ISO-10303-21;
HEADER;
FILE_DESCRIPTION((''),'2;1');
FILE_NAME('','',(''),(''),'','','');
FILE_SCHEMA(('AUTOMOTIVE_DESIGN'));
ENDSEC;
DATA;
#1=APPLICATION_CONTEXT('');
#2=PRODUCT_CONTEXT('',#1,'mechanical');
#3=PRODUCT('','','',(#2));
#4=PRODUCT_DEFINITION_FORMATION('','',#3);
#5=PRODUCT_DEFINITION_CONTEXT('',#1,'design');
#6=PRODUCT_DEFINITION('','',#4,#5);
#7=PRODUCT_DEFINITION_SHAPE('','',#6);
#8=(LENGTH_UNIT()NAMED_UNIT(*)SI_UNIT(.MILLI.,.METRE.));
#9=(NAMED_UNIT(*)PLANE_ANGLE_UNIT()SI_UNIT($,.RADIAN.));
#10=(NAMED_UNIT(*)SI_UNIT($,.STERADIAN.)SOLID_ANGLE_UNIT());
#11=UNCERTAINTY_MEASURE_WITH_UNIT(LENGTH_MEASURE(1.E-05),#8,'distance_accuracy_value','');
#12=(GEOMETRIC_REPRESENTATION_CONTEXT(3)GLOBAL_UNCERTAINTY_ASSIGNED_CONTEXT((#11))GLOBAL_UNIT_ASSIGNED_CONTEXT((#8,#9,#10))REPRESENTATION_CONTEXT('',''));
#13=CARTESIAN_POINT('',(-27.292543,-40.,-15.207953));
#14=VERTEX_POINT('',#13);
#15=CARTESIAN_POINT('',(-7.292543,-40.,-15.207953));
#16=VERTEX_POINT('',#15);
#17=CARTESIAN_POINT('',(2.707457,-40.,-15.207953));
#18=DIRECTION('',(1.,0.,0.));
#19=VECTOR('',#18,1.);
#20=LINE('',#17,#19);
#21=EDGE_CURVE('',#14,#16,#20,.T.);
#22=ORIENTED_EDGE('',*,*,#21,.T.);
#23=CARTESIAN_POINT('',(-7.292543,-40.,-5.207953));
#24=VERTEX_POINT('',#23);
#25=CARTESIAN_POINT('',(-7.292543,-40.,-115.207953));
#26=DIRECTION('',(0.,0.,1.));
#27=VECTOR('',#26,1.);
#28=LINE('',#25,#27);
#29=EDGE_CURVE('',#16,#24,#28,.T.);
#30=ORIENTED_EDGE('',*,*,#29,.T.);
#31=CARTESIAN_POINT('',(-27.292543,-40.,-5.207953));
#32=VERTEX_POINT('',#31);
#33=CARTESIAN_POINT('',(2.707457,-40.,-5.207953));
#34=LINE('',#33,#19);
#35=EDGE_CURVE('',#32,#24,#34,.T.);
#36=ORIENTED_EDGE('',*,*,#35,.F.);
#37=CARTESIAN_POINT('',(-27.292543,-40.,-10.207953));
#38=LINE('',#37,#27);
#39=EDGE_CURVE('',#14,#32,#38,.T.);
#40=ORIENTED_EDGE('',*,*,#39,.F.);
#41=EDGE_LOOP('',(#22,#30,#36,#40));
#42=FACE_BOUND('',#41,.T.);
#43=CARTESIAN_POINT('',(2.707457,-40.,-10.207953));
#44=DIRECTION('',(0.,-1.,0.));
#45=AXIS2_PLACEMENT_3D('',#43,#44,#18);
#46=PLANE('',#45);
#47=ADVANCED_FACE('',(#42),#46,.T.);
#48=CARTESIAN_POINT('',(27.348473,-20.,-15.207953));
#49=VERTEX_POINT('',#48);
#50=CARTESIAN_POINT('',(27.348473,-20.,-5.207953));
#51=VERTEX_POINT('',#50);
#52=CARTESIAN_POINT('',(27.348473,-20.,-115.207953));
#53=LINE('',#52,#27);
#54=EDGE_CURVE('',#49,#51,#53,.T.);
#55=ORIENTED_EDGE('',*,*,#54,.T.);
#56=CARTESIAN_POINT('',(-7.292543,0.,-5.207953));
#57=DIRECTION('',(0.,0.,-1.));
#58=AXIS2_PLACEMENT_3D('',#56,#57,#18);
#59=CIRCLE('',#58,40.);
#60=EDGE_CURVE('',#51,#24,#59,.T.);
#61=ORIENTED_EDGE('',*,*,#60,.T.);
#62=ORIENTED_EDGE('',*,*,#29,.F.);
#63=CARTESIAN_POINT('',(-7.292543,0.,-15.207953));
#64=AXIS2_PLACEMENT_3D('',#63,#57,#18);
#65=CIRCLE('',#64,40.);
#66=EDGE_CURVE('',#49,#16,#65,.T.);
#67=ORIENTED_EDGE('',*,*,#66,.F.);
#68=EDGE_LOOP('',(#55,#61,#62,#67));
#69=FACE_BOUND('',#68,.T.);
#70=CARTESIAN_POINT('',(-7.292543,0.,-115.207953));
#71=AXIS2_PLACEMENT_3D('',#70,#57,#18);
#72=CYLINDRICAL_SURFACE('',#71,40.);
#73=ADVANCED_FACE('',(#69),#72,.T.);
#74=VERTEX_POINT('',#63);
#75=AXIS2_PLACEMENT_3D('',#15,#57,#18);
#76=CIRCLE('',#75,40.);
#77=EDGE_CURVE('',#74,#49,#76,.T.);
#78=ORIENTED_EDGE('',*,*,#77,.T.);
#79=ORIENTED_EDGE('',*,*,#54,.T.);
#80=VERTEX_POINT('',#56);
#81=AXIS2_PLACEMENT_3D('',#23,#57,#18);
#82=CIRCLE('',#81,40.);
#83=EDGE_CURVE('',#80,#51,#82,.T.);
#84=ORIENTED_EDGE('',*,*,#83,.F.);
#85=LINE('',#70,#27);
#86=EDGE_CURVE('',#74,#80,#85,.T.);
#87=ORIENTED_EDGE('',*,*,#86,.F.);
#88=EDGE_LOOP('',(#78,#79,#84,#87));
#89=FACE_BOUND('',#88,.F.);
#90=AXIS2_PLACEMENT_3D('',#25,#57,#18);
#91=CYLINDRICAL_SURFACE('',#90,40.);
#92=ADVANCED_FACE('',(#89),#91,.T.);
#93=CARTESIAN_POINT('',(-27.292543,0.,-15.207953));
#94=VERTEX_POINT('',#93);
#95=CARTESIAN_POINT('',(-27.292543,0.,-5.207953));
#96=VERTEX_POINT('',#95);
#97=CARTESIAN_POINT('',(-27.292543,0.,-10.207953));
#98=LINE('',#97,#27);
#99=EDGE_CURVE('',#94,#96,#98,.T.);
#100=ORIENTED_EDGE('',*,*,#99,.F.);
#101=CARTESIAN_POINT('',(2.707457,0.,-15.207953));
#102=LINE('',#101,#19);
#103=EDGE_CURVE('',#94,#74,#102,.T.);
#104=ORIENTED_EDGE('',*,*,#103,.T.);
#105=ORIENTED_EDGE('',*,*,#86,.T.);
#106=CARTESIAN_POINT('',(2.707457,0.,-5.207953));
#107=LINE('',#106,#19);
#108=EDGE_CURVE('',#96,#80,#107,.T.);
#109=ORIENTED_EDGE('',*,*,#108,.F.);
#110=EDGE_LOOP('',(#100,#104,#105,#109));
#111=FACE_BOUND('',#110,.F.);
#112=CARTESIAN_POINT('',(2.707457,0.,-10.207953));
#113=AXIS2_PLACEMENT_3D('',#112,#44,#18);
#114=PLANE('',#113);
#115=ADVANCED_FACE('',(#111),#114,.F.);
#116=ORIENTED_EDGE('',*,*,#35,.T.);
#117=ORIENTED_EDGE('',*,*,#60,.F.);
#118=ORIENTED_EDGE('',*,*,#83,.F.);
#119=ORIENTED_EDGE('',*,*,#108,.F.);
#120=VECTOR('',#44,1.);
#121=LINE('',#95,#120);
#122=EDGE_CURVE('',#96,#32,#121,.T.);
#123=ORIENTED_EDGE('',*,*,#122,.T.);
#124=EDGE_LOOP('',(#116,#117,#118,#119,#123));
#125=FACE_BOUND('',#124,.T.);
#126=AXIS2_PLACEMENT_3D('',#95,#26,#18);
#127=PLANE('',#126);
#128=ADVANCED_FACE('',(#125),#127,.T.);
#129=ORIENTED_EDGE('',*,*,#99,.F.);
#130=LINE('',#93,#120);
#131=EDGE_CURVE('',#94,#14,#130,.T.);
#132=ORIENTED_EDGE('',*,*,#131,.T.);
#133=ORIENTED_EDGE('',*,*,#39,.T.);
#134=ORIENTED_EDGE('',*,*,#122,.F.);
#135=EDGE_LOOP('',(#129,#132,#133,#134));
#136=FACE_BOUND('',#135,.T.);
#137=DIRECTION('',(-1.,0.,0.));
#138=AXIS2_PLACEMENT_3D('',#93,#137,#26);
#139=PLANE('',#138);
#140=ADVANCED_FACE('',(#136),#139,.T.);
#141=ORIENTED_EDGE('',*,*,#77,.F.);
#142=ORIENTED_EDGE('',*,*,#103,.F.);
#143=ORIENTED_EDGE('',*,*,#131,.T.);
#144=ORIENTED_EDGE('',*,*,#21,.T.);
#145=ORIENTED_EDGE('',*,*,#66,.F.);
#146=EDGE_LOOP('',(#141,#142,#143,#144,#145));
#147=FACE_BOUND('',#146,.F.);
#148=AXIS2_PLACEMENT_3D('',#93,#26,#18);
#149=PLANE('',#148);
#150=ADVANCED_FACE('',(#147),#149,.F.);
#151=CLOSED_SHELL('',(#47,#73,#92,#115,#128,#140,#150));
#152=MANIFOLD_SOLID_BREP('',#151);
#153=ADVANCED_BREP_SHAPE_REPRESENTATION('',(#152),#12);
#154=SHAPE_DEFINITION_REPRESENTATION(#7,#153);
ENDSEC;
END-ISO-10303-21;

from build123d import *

# Parameters (mm, degrees)
F0_W        = 60
F0_H        = 10
F1_DEPTH    = 40
F2_T1_DEPTH = 210


# Not quite as in the source:
# - a fillet or chamfer that OpenCascade refuses, or shapes differently, is made with other operations: its cross-section is extruded or revolved along the edge and cut away or added


with BuildPart() as f1:
    # F0 (on Front) → F1 (new body)
    with BuildSketch(Plane.XZ):
        with Locations((2.7074571699, -10.2079533711)):
            Rectangle(F0_W, F0_H)
    extrude(amount=F1_DEPTH)

    # F2: fillet of radius 40 on 2 edges, made by hand

    # F2_s2 → F2_t1 (cut)
    with BuildSketch(Plane.XY.offset(-115.2079533711)):
        with BuildLine():
            ThreePointArc((32.7074571699, 0), (20.9917284174, -28.2842712475), (-7.2925428301, -40))
            Line((-7.2925428301, -40), (32.7074571699, -40))
            Line((32.7074571699, -40), (32.7074571699, 0))
        make_face()
        with BuildLine():
            ThreePointArc((32.7074571699, -40), (20.9917284174, -11.7157287525), (-7.2925428301, 0))
            Line((-7.2925428301, 0), (32.7074571699, 0))
            Line((32.7074571699, 0), (32.7074571699, -40))
        make_face()
    extrude(amount=F2_T1_DEPTH, mode=Mode.SUBTRACT)


solid = f1.part
